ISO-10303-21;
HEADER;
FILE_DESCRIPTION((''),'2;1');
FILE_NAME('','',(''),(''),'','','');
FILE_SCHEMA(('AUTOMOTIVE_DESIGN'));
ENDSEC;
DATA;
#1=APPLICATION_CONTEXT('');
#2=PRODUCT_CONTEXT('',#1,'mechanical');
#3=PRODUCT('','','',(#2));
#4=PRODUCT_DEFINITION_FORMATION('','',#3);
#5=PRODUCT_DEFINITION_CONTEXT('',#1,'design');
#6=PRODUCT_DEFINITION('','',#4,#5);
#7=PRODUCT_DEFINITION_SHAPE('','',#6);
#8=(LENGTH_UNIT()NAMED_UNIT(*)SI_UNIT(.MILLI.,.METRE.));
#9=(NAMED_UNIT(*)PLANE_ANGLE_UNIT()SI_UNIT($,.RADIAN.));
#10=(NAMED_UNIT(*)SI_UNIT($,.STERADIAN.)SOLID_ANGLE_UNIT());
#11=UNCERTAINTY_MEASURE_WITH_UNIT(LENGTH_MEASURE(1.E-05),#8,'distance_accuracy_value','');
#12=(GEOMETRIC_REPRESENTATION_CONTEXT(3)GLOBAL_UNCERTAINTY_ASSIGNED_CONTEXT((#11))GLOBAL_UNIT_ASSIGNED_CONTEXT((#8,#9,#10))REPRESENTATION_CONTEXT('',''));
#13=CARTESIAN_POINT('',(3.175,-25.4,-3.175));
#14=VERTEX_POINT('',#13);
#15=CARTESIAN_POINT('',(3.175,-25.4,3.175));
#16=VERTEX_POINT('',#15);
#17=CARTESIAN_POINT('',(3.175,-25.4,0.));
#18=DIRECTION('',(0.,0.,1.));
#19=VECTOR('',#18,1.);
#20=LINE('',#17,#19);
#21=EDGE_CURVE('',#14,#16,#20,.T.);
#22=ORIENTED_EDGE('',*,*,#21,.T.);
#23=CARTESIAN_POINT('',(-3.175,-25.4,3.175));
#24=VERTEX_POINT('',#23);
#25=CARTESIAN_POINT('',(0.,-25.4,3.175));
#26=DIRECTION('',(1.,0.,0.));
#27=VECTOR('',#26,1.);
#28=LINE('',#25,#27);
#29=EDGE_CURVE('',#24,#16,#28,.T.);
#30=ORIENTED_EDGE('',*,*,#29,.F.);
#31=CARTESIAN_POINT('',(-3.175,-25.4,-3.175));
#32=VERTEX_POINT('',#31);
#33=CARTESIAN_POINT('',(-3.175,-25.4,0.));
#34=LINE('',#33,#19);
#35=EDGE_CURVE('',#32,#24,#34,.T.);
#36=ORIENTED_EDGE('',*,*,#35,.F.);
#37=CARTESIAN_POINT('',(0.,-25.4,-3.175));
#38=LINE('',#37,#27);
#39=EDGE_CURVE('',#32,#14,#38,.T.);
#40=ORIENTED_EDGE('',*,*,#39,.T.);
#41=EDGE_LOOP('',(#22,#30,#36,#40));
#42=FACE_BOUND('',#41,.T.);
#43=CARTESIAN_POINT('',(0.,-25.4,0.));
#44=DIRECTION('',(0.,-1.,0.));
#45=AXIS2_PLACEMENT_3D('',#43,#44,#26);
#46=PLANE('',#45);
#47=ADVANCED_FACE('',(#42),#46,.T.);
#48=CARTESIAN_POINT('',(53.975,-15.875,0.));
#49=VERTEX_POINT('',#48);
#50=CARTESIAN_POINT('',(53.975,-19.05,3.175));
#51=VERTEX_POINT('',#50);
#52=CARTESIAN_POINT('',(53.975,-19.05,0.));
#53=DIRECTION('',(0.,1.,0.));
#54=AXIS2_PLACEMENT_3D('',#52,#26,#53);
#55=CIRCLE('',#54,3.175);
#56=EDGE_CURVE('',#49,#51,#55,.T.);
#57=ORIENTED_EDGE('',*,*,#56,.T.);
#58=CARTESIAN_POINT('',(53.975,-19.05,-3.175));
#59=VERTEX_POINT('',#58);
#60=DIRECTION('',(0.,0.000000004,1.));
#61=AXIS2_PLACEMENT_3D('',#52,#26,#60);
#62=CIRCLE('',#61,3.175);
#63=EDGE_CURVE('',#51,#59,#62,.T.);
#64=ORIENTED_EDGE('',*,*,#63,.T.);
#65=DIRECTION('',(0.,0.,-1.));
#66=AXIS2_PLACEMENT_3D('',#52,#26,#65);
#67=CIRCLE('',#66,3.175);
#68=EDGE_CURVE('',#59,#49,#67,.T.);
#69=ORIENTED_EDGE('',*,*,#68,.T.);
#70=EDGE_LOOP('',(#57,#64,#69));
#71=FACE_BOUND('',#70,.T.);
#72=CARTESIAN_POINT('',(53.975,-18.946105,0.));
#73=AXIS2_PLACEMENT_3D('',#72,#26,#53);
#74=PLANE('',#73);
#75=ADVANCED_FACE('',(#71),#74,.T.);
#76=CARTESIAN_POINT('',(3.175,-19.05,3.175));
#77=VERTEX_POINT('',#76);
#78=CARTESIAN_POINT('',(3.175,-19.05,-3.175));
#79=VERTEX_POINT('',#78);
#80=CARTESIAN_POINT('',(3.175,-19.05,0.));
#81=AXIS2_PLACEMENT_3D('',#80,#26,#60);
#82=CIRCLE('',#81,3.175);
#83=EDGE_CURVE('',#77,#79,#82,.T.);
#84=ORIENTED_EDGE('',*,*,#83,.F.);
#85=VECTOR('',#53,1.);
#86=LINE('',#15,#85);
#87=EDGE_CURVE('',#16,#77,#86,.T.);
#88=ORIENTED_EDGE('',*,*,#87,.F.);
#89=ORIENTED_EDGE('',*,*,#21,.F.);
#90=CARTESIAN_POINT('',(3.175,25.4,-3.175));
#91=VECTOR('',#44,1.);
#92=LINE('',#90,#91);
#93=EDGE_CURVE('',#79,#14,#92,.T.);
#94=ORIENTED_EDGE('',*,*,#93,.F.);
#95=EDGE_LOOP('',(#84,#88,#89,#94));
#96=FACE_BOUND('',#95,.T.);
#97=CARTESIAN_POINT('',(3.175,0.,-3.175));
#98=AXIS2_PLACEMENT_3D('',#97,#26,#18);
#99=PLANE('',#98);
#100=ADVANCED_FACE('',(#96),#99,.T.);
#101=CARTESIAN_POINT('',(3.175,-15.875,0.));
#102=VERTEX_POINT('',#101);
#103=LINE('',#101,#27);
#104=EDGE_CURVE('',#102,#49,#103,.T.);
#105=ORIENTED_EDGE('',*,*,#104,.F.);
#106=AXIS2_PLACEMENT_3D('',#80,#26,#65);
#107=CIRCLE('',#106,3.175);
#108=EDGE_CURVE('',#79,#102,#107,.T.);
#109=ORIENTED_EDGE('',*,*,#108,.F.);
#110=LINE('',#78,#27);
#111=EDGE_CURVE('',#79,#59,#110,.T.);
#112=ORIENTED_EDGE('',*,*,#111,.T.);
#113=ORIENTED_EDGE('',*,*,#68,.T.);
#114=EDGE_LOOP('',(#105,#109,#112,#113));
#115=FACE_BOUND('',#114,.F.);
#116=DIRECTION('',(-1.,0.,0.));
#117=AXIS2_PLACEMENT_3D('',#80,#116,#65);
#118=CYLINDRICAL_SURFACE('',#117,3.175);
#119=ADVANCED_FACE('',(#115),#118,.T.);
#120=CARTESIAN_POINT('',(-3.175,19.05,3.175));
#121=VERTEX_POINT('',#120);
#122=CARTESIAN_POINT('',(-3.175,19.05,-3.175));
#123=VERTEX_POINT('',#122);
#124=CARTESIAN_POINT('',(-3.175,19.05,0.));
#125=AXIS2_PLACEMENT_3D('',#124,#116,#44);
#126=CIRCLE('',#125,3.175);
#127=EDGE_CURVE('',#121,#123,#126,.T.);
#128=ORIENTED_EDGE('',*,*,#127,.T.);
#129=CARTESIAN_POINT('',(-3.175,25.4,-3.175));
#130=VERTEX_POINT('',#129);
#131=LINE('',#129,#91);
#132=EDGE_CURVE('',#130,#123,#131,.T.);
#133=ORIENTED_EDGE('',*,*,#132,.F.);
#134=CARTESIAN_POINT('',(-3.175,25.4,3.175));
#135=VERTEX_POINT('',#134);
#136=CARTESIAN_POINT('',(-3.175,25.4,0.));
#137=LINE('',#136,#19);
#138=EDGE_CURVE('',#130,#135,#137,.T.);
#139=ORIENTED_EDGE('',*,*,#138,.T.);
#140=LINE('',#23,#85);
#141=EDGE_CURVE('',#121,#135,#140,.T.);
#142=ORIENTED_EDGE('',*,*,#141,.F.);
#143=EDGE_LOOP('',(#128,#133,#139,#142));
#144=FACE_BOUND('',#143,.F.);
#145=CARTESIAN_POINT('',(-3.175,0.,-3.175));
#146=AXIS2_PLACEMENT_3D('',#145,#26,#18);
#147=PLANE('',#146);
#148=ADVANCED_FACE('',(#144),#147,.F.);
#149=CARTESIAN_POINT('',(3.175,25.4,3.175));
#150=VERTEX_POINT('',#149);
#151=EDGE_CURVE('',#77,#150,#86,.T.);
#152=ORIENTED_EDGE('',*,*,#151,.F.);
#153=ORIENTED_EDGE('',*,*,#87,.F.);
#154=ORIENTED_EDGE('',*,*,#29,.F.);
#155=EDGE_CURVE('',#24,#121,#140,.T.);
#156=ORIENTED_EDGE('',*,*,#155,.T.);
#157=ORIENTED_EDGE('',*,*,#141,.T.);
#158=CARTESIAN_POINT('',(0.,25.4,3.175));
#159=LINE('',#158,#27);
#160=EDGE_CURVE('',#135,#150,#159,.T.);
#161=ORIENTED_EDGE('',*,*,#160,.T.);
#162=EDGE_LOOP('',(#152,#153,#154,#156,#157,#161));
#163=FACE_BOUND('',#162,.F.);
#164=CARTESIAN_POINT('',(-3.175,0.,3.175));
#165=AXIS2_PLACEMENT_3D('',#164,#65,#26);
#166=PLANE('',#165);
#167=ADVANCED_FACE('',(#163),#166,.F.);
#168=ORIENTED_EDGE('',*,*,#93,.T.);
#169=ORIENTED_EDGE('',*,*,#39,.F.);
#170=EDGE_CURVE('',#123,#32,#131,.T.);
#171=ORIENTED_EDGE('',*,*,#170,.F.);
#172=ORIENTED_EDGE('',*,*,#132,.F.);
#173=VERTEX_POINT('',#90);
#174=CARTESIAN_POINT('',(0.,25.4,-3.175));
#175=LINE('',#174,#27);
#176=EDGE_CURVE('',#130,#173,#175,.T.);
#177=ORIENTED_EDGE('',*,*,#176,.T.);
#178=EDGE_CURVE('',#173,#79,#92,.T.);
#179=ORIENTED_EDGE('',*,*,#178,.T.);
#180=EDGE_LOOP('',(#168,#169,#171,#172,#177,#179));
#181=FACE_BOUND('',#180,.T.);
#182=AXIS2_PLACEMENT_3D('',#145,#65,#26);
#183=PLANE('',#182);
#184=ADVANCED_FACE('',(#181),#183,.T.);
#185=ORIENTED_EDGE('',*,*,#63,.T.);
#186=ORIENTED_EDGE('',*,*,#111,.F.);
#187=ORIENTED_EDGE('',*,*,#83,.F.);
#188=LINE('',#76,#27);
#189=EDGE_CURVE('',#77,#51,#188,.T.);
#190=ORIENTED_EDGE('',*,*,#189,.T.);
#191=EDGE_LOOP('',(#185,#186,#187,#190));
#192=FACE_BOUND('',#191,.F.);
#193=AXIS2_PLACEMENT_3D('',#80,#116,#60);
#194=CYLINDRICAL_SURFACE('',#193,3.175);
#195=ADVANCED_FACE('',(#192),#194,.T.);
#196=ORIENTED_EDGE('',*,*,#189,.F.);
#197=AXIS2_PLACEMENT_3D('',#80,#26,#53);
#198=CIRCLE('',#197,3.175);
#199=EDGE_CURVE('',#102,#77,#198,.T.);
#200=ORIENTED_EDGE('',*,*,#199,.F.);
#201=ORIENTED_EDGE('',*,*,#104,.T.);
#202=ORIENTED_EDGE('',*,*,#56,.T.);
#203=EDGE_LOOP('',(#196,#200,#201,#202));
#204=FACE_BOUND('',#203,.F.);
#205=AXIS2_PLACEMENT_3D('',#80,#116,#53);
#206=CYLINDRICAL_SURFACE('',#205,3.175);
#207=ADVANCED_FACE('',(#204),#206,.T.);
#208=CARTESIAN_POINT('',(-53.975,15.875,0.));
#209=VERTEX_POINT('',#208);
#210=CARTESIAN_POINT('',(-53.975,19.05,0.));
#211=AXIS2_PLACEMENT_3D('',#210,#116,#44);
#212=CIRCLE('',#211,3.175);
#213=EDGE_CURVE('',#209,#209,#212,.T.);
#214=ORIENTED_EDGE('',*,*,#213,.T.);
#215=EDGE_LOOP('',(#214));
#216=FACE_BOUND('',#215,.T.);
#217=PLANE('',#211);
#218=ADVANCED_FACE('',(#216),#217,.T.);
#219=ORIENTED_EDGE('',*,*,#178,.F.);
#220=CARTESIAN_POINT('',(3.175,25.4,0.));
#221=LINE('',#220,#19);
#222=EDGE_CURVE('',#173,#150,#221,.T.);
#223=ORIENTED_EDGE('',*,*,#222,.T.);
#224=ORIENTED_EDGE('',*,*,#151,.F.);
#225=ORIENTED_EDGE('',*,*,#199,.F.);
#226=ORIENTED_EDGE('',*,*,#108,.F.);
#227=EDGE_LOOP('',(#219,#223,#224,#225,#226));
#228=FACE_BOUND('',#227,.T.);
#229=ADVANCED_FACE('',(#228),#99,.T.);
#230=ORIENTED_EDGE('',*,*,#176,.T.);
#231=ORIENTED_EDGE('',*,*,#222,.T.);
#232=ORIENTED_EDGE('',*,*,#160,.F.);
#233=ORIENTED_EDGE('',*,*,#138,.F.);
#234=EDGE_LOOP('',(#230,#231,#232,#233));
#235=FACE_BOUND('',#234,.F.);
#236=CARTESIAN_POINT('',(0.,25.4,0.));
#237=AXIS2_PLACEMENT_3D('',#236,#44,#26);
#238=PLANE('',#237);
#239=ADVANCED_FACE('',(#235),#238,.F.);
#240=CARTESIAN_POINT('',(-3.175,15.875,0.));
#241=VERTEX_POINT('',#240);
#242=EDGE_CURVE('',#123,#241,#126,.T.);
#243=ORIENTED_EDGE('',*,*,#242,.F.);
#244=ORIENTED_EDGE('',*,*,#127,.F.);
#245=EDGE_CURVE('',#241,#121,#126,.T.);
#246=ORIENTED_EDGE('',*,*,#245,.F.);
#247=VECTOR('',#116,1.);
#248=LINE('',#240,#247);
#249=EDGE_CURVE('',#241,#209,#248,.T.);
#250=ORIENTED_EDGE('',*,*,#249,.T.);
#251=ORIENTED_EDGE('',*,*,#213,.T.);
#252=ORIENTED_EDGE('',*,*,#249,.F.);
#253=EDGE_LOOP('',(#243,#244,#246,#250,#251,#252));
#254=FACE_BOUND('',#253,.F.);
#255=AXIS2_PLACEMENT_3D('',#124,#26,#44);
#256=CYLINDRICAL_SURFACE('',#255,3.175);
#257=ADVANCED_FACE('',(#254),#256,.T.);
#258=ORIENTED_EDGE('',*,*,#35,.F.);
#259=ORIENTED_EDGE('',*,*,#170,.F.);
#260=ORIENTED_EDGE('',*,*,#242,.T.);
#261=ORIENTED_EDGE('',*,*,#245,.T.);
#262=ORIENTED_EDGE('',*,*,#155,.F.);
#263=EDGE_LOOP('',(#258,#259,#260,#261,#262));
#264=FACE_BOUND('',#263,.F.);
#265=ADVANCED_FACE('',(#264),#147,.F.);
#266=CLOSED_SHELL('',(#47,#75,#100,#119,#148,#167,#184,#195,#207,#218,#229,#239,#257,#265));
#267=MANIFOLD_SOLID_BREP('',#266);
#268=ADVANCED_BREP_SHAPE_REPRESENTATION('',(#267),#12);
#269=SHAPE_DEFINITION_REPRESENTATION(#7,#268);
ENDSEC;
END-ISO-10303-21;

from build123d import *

# Parameters (mm, degrees)
F0_W     = 6.35
F0_H     = 6.35
F1_DEPTH = 25.4
F3_DEPTH = 50.8
F4_R     = 3.175
F5_DEPTH = 50.8


with BuildPart() as f1:
    # F0 (on Front) → F1 (new body, symmetric)
    with BuildSketch(Plane.XZ):
        Rectangle(F0_W, F0_H)
    extrude(amount=F1_DEPTH, both=True)

    # F2 (on face) → F3 (join)
    with BuildSketch(Plane.YZ.offset(3.175)):
        with BuildLine():
            ThreePointArc((-19.05, -3.175), (-16.8049359697, -2.2450640303), (-15.875, 0))
            ThreePointArc((-15.875, 0), (-16.8049359657, 2.2450640262), (-19.0499999885, 3.175))
            ThreePointArc((-19.0499999885, 3.175), (-22.225, 5.7e-09), (-19.05, -3.175))
        make_face()
    extrude(amount=F3_DEPTH)

    # F4 (on face) → F5 (join)
    with BuildSketch(Plane(origin=(-3.175, 0, 0), x_dir=(0, -1, 0), z_dir=(-1, 0, 0))):
        with Locations((-19.05, 0)):
            Circle(F4_R)
    extrude(amount=F5_DEPTH)


solid = f1.part
